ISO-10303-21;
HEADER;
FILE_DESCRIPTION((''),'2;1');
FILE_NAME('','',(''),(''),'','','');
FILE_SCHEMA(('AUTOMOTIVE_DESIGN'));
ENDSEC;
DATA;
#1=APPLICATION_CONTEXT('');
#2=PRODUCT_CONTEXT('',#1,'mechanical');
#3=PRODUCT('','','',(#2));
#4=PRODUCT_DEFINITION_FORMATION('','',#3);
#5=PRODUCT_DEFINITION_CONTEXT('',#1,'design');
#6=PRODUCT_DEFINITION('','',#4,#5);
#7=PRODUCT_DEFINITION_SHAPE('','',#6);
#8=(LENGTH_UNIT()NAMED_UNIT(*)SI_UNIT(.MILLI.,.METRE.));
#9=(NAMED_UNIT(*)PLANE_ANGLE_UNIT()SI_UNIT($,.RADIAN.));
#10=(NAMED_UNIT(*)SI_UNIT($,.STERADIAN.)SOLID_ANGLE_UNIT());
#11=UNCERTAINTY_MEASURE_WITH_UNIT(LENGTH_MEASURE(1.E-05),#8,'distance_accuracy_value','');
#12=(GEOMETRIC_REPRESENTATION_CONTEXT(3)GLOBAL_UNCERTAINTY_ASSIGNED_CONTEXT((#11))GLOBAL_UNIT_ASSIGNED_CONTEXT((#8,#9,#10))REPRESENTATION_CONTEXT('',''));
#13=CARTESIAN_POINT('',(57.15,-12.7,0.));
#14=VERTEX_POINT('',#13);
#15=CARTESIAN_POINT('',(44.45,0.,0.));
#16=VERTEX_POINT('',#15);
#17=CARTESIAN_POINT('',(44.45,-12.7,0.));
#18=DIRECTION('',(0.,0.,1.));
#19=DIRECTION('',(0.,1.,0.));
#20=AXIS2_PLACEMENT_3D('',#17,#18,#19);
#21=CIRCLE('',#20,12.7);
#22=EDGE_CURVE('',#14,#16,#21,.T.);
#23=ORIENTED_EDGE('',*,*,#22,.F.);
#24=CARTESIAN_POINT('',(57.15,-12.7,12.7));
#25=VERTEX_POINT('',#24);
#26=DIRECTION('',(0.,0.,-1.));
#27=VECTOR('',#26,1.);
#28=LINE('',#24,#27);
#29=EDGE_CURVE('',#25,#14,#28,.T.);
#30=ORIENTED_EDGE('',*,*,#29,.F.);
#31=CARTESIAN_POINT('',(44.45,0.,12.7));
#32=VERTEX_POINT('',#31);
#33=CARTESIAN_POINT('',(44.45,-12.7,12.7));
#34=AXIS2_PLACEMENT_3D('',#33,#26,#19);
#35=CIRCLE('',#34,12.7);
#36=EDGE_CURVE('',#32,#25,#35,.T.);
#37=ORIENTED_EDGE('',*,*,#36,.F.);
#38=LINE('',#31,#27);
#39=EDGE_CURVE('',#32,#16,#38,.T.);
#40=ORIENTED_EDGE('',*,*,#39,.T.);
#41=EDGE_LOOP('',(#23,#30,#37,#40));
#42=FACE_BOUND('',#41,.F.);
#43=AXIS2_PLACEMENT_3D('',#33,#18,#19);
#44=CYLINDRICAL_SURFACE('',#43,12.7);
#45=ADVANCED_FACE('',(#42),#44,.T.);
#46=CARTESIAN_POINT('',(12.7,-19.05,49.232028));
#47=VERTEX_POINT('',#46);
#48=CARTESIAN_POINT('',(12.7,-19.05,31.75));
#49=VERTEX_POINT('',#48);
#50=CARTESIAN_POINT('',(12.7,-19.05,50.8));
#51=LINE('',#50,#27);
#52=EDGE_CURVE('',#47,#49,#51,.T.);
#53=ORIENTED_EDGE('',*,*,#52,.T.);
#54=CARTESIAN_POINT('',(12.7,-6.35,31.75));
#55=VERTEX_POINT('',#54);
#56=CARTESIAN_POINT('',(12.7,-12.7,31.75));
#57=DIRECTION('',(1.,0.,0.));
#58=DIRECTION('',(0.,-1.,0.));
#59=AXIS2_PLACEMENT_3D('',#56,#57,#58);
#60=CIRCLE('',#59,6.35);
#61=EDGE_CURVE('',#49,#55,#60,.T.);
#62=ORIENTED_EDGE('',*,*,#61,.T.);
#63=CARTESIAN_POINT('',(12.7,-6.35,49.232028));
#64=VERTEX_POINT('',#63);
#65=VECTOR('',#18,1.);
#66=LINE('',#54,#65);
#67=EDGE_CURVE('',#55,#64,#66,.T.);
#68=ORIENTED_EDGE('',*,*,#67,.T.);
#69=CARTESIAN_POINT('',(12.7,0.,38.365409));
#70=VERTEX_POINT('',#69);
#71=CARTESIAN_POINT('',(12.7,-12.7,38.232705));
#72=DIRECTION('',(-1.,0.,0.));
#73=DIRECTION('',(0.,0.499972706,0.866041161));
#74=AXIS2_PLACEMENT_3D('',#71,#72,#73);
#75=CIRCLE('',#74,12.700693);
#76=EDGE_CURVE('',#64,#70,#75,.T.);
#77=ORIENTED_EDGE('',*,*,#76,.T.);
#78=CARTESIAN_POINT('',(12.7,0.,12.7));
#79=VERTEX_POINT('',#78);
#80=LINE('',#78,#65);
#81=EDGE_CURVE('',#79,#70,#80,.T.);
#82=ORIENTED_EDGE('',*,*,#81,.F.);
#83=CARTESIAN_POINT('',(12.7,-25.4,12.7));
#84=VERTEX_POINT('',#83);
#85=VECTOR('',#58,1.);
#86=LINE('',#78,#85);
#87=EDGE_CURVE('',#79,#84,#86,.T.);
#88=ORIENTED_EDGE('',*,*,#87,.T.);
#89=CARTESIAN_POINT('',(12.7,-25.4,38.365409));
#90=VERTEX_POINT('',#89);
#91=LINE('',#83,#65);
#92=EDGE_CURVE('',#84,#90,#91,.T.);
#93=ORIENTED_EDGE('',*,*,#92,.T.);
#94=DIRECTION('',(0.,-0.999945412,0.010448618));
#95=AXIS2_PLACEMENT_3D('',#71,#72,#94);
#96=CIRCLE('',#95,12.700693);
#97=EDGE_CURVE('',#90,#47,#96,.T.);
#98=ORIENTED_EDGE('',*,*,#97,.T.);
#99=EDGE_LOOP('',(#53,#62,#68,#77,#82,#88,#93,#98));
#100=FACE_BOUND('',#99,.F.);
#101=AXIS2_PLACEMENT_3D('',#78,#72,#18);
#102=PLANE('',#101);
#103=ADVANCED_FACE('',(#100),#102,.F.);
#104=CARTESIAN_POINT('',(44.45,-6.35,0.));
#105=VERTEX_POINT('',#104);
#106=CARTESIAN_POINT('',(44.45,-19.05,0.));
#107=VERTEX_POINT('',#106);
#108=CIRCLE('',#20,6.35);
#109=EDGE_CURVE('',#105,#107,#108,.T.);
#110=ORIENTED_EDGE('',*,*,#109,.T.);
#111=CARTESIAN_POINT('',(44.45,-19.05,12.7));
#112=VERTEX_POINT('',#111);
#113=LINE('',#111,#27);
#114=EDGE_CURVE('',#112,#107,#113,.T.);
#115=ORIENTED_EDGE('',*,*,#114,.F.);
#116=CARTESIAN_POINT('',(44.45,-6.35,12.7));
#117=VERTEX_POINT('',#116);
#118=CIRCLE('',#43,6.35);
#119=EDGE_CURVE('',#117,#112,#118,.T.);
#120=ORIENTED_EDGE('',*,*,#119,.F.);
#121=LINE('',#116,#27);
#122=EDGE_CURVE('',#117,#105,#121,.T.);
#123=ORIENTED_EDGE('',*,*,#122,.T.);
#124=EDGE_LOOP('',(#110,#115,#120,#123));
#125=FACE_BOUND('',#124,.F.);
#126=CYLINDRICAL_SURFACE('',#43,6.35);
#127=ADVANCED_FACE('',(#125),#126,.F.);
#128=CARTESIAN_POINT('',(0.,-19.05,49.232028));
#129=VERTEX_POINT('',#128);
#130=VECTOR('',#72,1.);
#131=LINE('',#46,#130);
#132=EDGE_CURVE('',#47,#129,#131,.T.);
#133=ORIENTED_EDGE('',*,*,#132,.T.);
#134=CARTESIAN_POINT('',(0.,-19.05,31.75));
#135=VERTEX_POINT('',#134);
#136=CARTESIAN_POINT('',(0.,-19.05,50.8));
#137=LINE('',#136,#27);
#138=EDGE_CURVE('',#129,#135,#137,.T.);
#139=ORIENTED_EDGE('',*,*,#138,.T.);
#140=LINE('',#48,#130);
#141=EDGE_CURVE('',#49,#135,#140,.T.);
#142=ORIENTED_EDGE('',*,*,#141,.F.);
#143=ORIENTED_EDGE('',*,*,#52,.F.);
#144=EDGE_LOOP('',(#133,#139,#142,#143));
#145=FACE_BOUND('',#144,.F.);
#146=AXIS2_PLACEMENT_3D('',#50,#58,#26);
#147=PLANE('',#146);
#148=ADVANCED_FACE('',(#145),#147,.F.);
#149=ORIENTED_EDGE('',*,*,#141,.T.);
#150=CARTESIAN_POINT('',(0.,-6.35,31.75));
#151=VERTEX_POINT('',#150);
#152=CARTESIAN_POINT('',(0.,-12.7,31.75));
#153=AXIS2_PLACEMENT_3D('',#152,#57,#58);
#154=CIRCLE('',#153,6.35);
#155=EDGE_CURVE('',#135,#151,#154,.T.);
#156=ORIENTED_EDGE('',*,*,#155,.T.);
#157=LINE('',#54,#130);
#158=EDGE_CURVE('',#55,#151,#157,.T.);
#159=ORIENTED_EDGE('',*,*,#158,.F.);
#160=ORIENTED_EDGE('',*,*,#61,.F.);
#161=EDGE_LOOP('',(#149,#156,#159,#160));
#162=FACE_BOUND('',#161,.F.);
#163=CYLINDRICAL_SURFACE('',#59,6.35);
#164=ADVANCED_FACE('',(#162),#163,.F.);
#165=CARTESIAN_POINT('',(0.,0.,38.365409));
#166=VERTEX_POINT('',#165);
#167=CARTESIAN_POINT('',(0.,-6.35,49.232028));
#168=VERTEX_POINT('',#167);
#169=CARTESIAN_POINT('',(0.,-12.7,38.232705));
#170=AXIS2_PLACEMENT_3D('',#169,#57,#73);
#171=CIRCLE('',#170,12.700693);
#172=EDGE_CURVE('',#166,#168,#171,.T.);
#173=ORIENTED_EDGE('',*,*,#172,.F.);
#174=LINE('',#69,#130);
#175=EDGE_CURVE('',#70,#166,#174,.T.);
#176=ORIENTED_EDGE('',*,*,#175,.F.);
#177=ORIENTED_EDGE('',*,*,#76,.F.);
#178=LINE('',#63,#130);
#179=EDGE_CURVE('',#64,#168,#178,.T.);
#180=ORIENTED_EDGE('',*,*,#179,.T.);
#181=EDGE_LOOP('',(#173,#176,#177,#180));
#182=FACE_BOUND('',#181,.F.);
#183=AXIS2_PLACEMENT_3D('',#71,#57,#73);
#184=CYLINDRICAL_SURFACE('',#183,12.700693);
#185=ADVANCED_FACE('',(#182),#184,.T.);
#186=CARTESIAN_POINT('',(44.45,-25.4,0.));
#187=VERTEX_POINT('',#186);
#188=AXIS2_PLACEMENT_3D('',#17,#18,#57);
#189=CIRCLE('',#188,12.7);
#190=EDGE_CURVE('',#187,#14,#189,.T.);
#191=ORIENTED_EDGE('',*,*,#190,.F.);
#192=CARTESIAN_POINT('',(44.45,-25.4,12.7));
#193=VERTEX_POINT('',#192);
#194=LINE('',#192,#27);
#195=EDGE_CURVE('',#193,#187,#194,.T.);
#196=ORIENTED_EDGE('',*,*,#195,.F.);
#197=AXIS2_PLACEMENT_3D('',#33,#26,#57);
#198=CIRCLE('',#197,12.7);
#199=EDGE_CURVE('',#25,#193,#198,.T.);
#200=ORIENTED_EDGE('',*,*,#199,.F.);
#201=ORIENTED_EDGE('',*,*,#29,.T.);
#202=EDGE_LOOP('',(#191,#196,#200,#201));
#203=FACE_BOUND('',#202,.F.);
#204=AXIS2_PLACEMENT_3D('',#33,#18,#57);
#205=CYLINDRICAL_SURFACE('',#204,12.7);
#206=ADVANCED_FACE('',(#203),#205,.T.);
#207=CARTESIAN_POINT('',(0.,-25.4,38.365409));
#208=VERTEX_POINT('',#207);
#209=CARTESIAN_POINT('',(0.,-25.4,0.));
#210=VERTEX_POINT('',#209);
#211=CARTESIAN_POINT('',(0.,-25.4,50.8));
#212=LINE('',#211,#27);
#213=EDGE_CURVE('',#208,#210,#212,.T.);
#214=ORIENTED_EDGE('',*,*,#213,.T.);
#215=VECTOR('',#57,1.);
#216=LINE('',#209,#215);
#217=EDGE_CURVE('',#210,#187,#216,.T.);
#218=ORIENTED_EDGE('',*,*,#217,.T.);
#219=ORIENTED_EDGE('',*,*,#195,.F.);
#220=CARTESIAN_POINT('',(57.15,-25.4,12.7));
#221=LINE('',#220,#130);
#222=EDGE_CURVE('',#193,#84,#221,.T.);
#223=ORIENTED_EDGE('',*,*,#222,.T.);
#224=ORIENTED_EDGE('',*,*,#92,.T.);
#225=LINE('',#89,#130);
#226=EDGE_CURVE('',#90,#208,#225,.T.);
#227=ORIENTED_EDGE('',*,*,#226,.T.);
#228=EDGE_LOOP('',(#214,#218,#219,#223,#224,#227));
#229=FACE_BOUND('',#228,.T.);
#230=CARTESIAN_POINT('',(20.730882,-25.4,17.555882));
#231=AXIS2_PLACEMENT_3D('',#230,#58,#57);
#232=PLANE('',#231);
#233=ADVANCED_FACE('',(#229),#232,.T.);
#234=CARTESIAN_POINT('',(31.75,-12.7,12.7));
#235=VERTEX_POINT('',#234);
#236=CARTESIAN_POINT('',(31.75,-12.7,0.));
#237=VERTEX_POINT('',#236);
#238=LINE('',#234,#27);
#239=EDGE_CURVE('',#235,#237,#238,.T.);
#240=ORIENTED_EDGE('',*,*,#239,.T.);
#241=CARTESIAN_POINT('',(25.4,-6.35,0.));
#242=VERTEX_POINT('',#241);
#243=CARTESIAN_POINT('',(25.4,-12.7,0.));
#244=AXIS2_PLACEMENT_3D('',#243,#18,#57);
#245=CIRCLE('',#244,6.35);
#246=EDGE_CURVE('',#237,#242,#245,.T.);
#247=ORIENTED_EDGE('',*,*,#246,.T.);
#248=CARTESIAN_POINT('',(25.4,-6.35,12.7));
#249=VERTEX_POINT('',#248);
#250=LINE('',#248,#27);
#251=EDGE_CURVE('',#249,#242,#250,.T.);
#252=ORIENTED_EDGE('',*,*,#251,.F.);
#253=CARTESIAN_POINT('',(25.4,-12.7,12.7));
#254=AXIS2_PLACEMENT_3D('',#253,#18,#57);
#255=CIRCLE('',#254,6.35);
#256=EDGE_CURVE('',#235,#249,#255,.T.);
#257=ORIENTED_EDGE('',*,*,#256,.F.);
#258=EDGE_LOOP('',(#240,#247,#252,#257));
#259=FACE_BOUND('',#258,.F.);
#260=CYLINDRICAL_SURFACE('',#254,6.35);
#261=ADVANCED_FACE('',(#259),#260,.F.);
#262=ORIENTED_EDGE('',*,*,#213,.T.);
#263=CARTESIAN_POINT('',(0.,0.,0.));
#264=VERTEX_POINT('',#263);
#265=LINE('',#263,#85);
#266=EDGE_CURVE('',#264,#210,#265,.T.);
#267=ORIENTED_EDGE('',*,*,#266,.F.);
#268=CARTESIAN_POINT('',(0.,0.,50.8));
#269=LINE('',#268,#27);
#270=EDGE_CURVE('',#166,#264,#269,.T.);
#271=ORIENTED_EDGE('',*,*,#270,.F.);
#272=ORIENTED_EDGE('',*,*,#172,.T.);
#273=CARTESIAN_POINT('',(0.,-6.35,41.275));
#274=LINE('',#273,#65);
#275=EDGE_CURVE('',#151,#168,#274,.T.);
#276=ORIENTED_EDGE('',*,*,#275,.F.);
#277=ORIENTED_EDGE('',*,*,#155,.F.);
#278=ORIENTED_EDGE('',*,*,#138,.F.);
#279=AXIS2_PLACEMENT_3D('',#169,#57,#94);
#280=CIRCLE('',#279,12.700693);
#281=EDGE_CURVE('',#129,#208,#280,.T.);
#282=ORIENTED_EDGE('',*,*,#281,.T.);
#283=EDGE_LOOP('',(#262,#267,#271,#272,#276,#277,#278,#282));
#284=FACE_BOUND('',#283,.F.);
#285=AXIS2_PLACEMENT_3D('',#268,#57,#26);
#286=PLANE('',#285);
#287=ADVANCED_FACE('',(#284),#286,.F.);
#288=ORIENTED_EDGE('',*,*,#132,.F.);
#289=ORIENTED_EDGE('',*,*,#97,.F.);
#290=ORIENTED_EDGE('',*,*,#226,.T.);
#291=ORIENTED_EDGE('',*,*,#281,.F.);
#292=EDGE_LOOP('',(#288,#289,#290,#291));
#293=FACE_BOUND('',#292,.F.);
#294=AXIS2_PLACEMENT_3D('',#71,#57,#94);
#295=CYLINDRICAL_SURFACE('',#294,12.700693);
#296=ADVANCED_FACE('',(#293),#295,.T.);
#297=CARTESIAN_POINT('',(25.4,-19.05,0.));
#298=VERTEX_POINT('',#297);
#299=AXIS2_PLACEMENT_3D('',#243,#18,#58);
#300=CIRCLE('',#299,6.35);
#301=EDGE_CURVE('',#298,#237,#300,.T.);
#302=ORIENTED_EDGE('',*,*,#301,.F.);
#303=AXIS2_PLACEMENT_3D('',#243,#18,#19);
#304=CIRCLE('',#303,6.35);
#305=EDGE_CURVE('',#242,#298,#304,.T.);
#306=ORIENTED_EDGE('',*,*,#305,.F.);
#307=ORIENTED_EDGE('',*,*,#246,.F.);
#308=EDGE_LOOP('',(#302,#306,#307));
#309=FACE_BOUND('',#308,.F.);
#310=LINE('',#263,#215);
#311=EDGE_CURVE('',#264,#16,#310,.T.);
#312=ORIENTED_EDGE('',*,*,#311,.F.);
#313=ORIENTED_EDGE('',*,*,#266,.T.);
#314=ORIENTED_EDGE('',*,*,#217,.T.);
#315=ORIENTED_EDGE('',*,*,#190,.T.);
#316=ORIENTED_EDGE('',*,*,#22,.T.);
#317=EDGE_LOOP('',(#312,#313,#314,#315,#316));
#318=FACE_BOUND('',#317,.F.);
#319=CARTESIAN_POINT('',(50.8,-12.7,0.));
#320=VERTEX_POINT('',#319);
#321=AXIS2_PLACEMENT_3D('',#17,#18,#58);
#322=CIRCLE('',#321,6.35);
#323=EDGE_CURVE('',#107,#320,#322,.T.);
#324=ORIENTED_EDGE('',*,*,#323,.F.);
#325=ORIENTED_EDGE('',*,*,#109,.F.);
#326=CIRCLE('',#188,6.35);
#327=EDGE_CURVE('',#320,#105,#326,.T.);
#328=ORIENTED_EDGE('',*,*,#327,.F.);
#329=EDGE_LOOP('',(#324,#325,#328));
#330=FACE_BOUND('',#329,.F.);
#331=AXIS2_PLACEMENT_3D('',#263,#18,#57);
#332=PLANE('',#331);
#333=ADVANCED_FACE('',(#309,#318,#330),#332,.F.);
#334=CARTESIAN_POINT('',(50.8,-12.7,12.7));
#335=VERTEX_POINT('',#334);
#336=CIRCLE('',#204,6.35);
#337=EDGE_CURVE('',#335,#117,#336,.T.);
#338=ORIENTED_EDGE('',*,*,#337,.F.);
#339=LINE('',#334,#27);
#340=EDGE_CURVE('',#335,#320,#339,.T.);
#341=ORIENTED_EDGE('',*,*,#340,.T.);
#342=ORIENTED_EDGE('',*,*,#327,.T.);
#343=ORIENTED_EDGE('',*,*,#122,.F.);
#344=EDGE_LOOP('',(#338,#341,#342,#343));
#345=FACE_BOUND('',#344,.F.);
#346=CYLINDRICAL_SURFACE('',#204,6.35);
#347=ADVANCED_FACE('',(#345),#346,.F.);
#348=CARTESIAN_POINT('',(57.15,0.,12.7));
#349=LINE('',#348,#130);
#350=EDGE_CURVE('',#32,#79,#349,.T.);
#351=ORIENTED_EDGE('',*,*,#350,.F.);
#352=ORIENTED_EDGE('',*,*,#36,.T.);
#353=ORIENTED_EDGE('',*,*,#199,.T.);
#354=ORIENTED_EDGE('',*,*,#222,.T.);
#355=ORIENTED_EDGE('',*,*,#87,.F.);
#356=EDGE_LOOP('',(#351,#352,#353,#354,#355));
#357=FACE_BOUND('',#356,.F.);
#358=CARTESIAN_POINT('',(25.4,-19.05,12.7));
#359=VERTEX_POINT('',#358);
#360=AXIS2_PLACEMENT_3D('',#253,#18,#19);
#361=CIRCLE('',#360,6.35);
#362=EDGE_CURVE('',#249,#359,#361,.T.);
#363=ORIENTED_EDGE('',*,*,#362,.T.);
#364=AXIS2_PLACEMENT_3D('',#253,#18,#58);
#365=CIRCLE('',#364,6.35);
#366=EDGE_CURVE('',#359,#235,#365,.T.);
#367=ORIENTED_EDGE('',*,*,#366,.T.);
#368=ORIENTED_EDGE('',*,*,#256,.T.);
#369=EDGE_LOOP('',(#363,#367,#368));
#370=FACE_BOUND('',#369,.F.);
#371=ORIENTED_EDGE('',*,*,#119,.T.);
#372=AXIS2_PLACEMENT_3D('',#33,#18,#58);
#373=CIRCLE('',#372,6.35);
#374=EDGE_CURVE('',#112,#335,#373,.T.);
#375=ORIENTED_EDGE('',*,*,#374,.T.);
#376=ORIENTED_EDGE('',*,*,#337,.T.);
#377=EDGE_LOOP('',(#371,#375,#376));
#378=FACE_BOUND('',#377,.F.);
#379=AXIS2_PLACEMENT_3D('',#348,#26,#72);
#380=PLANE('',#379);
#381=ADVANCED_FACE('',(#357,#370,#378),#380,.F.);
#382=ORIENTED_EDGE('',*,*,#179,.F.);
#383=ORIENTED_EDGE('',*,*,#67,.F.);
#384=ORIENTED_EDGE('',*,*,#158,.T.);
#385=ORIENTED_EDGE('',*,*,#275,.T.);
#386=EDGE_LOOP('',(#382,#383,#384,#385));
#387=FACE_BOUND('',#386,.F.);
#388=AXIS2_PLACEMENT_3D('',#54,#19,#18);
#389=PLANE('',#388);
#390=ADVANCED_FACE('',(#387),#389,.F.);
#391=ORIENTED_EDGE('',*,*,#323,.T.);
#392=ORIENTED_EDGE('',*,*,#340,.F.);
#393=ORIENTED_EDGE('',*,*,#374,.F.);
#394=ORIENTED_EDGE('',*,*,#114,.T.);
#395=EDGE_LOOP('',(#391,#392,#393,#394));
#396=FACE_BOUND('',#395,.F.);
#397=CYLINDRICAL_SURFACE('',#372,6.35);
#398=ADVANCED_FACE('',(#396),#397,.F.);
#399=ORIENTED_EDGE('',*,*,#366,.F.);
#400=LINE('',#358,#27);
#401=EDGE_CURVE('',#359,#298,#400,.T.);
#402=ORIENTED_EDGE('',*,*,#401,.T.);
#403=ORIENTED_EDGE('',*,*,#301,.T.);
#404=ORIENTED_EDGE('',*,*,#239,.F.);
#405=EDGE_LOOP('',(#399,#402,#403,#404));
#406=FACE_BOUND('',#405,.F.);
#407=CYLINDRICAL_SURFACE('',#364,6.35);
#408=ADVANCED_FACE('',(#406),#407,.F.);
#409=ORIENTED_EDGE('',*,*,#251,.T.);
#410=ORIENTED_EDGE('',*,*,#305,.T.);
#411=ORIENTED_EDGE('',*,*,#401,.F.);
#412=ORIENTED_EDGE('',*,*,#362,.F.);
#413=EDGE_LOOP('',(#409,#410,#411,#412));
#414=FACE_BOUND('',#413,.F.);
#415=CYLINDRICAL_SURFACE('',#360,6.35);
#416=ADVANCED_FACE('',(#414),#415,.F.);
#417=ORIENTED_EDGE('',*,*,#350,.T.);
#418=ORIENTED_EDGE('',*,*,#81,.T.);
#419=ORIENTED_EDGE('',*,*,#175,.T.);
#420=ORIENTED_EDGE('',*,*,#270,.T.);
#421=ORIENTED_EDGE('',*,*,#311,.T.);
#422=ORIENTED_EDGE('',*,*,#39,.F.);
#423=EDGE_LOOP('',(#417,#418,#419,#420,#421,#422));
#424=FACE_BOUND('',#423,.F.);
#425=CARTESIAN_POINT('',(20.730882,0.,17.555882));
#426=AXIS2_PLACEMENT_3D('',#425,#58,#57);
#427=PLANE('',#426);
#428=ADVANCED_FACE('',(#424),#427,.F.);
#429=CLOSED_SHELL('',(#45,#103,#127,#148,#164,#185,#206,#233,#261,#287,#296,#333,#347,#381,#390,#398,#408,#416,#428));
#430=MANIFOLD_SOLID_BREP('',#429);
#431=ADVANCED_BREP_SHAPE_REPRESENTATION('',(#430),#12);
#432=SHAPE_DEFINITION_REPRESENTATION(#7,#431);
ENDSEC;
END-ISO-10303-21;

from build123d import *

# Parameters (mm, degrees)
F1_DEPTH = 25.4
F3_DEPTH = 12.701
F5_DEPTH = 12.701
F7_DEPTH = 12.701


with BuildPart() as f1:
    # F0 (on Front) → F1 (new body)
    with BuildSketch(Plane.XZ):
        Polygon((0, 50.8), (0, 0), (57.15, 0), (57.15, 12.7), (12.7, 12.7), (12.7, 50.8), align=None)
    extrude(amount=F1_DEPTH)

    # F2 (on face) → F3 (cut, through all)
    with BuildSketch(Plane.YZ.offset(12.7)):
        with BuildLine():
            ThreePointArc((-6.35, 31.75), (-12.7, 38.1), (-19.05, 31.75))
            Line((-19.05, 31.75), (-6.35, 31.75))
        make_face()
        with BuildLine():
            Line((-6.35, 31.75), (-19.05, 31.75))
            ThreePointArc((-19.05, 31.75), (-12.7, 25.4), (-6.35, 31.75))
        make_face()
        with BuildLine():
            Line((-19.05, 50.8), (-19.05, 31.75))
            ThreePointArc((-19.05, 31.75), (-12.7, 38.1), (-6.35, 31.75))
            Line((-6.35, 31.75), (-6.35, 50.8))
            Line((-6.35, 50.8), (-19.05, 50.8))
        make_face()
    extrude(amount=-F3_DEPTH, mode=Mode.SUBTRACT)

    # F4 (on face) → F5 (cut, through all)
    with BuildSketch(Plane.YZ.offset(12.7)):
        with BuildLine():
            Line((-25.4, 50.8), (-25.4, 38.3654093824))
            ThreePointArc((-25.4, 38.3654093824), (-23.6656953438, 44.6406010825), (-19.05, 49.2320278765))
            Line((-19.05, 49.2320278765), (-19.05, 50.8))
            Line((-19.05, 50.8), (-25.4, 50.8))
        make_face()
        with BuildLine():
            Line((-6.35, 50.8), (-6.35, 49.2320278765))
            ThreePointArc((-6.35, 49.2320278765), (-1.7343046562, 44.6406010825), (0, 38.3654093824))
            Line((0, 38.3654093824), (0, 50.8))
            Line((0, 50.8), (-6.35, 50.8))
        make_face()
    extrude(amount=-F5_DEPTH, mode=Mode.SUBTRACT)

    # F6 (on face) → F7 (cut, through all)
    with BuildSketch(Plane.XY.offset(12.7)):
        with BuildLine():
            ThreePointArc((25.4, -6.35), (19.05, -12.7), (25.4, -19.05))
            Line((25.4, -19.05), (25.4, -6.35))
        make_face()
        with BuildLine():
            Line((25.4, -6.35), (25.4, -19.05))
            ThreePointArc((25.4, -19.05), (29.8901280605, -17.1901280605), (31.75, -12.7))
            ThreePointArc((31.75, -12.7), (29.8901280605, -8.2098719395), (25.4, -6.35))
        make_face()
        with BuildLine():
            ThreePointArc((44.45, -6.35), (38.1, -12.7), (44.45, -19.05))
            Line((44.45, -19.05), (44.45, -6.35))
        make_face()
        with BuildLine():
            Line((44.45, -6.35), (44.45, -19.05))
            ThreePointArc((44.45, -19.05), (48.9401280605, -17.1901280605), (50.8, -12.7))
            ThreePointArc((50.8, -12.7), (48.9401280605, -8.2098719395), (44.45, -6.35))
        make_face()
        with BuildLine():
            ThreePointArc((57.15, -12.7), (53.4302561211, -21.6802561211), (44.45, -25.4))
            Line((44.45, -25.4), (57.15, -25.4))
            Line((57.15, -25.4), (57.15, -12.7))
        make_face()
        with BuildLine():
            ThreePointArc((44.45, 0), (53.4302561211, -3.7197438789), (57.15, -12.7))
            Line((57.15, -12.7), (57.15, 0))
            Line((57.15, 0), (44.45, 0))
        make_face()
    extrude(amount=-F7_DEPTH, mode=Mode.SUBTRACT)


solid = f1.part
